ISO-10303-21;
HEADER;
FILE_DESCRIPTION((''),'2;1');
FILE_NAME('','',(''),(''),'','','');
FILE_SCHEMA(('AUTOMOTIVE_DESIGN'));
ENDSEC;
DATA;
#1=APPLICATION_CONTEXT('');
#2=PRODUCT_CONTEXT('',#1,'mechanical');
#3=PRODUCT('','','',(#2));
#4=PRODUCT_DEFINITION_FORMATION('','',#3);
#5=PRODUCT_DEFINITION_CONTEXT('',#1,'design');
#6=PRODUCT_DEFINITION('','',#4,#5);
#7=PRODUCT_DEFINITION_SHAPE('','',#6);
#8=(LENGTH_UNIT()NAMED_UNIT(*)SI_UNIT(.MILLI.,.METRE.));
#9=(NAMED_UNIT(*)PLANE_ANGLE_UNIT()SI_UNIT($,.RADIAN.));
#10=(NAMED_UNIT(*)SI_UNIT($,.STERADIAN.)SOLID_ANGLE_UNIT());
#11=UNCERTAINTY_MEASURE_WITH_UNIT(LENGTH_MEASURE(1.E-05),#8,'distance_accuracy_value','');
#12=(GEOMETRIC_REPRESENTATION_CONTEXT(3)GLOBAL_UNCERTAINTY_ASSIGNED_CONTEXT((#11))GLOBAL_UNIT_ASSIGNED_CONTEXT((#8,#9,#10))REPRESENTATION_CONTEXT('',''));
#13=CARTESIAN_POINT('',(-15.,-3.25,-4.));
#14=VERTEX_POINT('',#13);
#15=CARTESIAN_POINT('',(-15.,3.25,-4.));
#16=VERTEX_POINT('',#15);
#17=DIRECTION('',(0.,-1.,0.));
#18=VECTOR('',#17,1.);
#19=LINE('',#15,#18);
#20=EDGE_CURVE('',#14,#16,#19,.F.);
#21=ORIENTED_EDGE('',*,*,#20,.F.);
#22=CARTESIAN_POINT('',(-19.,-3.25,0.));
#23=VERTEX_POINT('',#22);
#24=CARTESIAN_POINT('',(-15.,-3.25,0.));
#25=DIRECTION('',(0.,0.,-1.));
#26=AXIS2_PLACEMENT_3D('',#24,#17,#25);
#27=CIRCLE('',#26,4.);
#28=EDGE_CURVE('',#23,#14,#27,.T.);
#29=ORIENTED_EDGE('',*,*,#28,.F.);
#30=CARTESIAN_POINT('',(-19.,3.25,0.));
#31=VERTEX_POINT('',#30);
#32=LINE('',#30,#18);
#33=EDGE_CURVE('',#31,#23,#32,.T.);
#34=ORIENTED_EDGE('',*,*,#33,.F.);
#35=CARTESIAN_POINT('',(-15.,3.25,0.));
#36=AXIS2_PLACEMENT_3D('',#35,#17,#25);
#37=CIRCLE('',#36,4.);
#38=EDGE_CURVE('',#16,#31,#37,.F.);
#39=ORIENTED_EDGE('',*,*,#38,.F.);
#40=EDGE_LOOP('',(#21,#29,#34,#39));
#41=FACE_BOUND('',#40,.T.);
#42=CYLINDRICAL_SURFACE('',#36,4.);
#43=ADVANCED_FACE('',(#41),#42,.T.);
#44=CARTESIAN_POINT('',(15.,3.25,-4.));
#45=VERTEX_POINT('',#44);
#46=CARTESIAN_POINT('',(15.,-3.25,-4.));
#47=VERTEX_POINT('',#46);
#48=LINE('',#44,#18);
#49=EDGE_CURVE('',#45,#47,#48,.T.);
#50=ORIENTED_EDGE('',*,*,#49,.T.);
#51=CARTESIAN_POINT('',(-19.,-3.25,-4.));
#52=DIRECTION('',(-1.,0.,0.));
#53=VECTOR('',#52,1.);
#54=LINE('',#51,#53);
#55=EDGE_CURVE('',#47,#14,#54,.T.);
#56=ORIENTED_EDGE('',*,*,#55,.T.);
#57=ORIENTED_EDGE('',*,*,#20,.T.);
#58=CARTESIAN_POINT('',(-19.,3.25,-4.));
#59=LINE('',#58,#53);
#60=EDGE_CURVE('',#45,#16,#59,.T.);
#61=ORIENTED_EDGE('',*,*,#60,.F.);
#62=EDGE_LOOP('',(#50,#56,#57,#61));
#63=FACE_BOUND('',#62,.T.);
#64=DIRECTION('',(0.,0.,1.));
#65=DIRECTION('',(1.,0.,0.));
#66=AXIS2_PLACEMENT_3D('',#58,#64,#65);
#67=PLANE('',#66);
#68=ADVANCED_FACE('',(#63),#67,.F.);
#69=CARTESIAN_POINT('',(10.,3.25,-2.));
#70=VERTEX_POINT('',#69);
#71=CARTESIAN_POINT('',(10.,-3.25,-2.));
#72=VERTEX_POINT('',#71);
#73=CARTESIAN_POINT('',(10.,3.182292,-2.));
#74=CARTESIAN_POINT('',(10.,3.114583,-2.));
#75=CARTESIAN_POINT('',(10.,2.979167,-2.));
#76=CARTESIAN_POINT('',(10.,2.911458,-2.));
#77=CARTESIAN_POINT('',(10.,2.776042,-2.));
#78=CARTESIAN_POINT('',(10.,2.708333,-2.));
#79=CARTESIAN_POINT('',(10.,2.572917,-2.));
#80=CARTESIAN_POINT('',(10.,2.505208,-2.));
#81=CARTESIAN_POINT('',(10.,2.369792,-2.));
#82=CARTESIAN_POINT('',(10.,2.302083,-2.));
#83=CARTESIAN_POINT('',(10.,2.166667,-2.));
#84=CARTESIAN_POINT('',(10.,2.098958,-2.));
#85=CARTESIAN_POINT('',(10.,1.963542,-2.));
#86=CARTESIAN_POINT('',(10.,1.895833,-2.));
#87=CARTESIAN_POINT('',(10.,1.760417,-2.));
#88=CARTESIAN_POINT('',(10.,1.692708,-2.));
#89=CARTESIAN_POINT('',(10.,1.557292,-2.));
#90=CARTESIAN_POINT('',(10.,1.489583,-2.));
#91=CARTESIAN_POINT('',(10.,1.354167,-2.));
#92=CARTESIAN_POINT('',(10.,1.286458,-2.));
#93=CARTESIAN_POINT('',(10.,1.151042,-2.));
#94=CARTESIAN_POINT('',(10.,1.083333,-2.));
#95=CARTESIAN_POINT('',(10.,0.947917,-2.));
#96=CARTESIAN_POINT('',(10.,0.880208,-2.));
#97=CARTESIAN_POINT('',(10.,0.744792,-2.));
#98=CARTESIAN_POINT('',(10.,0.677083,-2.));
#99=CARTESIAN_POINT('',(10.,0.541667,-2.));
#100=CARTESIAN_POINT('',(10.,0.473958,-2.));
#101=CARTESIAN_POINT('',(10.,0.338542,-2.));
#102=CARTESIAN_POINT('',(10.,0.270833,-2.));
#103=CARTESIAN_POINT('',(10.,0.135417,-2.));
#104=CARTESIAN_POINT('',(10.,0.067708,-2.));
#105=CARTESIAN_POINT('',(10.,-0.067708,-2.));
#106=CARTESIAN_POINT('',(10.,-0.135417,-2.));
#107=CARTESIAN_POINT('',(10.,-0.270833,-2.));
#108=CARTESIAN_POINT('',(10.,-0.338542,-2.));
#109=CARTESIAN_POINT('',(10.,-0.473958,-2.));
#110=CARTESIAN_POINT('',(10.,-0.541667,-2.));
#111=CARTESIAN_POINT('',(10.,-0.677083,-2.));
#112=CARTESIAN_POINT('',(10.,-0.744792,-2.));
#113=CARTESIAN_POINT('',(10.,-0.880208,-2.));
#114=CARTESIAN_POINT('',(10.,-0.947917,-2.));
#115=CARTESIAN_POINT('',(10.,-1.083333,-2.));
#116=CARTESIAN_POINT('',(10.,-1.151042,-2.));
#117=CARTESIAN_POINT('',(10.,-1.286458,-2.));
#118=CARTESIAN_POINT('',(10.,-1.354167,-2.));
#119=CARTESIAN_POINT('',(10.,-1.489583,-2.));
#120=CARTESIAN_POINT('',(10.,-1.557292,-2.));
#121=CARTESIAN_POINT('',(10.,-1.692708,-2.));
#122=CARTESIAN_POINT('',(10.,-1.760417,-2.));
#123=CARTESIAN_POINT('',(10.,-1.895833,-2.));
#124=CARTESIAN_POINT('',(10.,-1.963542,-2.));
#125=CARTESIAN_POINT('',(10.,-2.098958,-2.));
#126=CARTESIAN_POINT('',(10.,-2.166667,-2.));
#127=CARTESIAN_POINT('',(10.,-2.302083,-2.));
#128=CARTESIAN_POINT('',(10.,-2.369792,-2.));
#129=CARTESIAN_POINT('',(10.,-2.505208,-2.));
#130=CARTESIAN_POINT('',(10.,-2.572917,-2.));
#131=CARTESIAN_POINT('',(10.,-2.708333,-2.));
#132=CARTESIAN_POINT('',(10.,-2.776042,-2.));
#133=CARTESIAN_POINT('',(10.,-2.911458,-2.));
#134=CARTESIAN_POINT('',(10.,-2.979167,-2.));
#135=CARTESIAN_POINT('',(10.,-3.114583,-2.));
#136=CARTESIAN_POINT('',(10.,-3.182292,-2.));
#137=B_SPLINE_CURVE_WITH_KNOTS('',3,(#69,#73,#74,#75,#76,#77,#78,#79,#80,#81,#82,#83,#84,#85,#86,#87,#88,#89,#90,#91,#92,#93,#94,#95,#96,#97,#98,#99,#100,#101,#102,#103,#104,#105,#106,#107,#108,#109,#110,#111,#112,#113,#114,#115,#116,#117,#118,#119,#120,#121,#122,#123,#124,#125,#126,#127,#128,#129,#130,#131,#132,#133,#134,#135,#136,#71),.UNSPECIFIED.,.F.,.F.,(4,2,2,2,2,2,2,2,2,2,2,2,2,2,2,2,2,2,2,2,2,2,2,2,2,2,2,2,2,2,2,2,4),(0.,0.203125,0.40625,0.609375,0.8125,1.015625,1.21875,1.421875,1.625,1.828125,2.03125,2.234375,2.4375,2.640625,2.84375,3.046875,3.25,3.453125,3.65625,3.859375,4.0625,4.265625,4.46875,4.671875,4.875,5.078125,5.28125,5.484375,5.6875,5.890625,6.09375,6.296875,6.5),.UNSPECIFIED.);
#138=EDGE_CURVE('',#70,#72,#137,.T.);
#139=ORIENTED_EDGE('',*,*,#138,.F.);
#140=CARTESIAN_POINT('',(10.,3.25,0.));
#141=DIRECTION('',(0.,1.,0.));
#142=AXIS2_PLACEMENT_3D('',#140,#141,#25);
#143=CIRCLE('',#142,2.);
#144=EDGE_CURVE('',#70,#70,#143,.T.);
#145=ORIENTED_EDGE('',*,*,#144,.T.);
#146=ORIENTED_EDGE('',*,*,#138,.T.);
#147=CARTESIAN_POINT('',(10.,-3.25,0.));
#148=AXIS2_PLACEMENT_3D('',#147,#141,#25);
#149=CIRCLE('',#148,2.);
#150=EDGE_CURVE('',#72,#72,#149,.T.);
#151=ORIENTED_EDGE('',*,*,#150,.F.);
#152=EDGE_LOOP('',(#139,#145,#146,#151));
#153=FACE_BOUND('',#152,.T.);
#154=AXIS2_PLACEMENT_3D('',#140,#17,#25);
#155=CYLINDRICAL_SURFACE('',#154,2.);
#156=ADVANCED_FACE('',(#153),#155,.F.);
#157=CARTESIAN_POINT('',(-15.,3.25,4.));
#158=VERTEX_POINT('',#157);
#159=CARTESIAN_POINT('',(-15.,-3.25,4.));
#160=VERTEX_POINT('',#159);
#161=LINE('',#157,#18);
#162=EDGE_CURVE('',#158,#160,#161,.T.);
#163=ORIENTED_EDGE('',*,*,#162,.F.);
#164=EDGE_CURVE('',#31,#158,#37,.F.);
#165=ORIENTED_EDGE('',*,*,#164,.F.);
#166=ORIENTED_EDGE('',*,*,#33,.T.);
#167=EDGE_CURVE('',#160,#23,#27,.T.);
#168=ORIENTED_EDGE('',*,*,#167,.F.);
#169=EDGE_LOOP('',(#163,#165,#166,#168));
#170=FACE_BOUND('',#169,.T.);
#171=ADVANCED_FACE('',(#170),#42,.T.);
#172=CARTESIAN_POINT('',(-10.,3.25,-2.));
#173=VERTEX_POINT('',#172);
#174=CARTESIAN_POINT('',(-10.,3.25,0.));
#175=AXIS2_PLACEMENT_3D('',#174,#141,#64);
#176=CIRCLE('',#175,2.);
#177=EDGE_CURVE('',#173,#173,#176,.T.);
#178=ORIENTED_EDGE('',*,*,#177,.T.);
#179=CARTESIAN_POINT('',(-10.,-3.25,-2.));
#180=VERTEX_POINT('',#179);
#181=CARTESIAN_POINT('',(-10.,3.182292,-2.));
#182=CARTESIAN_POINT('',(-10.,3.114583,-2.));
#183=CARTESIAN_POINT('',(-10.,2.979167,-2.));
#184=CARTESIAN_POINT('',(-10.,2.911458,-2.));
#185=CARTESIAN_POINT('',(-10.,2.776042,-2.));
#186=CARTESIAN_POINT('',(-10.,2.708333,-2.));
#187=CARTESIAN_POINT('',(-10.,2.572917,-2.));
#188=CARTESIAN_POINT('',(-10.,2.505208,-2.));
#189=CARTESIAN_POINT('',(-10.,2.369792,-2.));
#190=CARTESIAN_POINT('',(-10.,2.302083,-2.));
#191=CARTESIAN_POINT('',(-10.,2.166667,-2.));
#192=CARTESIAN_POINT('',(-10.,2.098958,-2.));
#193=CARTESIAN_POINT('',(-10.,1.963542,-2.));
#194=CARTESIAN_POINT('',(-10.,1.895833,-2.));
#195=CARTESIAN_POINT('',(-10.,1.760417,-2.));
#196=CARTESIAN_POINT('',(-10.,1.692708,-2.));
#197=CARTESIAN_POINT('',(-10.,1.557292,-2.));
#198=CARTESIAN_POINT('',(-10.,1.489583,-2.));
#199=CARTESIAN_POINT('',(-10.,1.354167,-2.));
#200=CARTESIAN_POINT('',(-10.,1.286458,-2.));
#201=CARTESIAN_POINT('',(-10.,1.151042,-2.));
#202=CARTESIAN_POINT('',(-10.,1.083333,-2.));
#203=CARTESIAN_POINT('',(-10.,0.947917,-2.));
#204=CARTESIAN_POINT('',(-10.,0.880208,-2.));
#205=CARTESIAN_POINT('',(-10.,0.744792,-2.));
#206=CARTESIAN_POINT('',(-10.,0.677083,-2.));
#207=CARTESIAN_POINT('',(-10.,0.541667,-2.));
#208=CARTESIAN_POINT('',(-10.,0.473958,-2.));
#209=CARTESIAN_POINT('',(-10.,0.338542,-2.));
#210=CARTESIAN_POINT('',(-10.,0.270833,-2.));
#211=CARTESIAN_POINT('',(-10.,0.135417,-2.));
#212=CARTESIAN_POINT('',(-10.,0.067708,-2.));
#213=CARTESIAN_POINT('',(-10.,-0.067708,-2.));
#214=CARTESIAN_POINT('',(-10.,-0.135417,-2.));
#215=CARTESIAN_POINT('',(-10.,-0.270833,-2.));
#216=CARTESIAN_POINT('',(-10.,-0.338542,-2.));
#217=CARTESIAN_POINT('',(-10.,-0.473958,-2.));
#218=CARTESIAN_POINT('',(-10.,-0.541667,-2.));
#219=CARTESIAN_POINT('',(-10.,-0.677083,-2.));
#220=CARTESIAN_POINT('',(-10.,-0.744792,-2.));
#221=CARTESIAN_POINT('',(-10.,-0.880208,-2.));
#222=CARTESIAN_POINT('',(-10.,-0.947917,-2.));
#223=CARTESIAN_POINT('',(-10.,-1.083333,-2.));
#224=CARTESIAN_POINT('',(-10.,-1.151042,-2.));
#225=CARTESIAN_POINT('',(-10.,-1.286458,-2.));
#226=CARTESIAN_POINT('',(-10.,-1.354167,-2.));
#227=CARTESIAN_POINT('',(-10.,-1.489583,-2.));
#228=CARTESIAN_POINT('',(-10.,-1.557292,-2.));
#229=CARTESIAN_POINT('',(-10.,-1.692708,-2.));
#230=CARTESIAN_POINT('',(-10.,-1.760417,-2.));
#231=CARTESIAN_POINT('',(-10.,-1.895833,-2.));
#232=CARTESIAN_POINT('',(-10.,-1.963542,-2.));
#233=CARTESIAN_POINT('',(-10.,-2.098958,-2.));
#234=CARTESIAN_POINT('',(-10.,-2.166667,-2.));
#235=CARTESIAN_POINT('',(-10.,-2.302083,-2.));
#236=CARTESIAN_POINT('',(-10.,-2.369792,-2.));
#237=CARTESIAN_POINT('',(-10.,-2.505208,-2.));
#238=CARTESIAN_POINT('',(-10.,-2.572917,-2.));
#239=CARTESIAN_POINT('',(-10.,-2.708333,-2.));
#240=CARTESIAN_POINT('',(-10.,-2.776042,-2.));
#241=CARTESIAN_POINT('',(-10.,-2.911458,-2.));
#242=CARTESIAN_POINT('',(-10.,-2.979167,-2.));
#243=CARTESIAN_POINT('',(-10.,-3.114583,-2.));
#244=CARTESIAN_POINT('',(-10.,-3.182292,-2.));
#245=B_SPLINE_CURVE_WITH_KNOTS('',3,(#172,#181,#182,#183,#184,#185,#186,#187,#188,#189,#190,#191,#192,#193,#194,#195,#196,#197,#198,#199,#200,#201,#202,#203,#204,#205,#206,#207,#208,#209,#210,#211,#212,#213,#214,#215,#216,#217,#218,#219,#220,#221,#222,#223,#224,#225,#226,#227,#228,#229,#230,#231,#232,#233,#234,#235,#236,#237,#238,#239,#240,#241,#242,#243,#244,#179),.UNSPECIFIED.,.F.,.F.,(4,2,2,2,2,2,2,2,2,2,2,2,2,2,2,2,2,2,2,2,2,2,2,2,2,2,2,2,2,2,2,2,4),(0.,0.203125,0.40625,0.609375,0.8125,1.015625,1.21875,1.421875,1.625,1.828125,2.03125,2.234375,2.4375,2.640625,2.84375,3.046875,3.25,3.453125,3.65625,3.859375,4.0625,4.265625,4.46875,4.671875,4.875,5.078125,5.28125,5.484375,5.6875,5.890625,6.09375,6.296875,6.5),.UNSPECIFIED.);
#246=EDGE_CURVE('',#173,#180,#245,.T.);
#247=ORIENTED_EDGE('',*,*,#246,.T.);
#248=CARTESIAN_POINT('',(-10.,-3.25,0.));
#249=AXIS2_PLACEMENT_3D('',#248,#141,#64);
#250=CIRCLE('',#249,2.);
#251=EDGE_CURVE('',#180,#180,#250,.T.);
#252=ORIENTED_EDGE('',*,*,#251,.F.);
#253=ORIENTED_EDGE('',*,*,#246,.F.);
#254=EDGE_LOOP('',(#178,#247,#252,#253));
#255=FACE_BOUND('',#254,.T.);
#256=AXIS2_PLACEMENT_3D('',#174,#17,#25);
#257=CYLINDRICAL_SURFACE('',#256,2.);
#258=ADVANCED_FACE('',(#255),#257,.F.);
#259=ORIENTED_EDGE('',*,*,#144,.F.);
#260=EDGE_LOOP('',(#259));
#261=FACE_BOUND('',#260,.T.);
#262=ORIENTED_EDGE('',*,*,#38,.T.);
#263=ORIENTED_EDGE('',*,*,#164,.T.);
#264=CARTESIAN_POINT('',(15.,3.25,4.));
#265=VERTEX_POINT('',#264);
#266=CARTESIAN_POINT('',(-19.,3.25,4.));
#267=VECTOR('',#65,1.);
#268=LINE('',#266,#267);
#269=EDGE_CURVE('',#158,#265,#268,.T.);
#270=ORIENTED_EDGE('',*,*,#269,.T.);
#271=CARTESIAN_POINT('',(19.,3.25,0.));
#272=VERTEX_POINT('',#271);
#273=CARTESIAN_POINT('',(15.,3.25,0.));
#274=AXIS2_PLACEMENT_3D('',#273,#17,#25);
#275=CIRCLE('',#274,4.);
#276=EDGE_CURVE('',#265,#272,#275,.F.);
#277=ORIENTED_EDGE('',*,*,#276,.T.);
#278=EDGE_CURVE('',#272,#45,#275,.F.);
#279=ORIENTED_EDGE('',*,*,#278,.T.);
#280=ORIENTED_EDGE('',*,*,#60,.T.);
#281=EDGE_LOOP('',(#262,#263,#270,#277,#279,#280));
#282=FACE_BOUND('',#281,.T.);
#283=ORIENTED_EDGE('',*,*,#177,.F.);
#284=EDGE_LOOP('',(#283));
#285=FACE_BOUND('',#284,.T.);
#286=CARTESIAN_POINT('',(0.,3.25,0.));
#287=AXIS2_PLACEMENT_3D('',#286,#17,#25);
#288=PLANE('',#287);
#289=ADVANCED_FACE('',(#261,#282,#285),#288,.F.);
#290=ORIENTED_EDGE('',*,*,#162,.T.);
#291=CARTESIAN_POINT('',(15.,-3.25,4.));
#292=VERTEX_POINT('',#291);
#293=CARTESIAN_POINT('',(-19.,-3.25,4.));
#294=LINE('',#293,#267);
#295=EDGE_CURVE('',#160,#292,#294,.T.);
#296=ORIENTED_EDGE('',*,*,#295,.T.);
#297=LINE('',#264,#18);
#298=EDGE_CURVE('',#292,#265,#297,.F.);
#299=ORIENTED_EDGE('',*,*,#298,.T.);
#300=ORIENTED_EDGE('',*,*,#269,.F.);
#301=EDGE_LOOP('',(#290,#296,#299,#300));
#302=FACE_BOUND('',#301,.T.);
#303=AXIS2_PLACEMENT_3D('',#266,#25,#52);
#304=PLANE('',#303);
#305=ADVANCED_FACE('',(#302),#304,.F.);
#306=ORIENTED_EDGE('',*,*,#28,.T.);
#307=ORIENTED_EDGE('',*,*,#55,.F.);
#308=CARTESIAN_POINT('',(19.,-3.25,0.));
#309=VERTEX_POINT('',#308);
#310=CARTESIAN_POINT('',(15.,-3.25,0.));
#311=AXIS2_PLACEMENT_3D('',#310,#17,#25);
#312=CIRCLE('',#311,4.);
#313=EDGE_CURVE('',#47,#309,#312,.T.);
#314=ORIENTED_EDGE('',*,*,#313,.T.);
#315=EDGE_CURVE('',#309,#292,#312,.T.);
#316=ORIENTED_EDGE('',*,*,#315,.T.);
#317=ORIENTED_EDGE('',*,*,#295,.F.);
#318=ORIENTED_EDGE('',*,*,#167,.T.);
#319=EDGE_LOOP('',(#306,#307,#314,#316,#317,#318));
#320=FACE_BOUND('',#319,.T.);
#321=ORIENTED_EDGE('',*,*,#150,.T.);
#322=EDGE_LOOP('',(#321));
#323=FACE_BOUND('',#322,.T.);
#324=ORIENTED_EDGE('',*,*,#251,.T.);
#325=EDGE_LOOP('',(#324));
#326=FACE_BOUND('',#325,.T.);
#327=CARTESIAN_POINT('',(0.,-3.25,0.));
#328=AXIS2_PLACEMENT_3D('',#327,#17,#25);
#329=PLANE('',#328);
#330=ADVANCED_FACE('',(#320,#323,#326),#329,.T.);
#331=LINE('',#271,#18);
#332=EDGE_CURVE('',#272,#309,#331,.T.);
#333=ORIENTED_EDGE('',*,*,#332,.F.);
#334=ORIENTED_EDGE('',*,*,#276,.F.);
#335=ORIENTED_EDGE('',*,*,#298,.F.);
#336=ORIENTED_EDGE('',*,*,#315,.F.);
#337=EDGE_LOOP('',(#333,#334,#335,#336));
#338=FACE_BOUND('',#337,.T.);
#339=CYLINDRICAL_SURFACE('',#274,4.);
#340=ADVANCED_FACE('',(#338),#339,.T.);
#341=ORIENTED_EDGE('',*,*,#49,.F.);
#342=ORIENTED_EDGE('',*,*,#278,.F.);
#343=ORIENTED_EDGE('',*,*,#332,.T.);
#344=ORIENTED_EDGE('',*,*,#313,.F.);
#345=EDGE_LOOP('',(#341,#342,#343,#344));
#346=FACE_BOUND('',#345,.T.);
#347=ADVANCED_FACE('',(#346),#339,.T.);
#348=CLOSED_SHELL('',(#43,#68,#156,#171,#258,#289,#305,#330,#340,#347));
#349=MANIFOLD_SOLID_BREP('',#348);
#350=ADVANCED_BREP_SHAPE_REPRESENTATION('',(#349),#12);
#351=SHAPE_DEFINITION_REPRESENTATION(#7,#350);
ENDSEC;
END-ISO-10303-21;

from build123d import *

# Parameters (mm, degrees)
ESBO_O1_W                = 38
ESBO_O1_H                = 8
ESBO_O1_R                = 2
RESSALTO_EXTRUS_O1_DEPTH = 3.25
FILETE1_R                = 4


with BuildPart() as part:
    # Esboço1 → Ressalto-extrusão1 (new, symmetric)
    with BuildSketch(Plane(origin=(0, 0, 0), x_dir=(1, 0, 0), z_dir=(0, 1, 0))):
        Rectangle(ESBO_O1_W, ESBO_O1_H)
        with Locations(Location((-10, 0, 0), (0, 0, 90))):
            Circle(ESBO_O1_R, mode=Mode.SUBTRACT)
        with Locations(Location((10, 0, 0), (0, 0, 90))):
            Circle(ESBO_O1_R, mode=Mode.SUBTRACT)
    extrude(amount=RESSALTO_EXTRUS_O1_DEPTH, both=True)

    # Filete1
    filete1_edges = [part.edges().sort_by_distance(p)[0] for p in [
        (-19, 0, 4),
        (-19, 0, -4),
        (19, 0, -4),
        (19, 0, 4),
    ]]
    fillet(filete1_edges, radius=FILETE1_R - 0.0001)  # a hair under: the kernel refuses the full size


solid = part.part
